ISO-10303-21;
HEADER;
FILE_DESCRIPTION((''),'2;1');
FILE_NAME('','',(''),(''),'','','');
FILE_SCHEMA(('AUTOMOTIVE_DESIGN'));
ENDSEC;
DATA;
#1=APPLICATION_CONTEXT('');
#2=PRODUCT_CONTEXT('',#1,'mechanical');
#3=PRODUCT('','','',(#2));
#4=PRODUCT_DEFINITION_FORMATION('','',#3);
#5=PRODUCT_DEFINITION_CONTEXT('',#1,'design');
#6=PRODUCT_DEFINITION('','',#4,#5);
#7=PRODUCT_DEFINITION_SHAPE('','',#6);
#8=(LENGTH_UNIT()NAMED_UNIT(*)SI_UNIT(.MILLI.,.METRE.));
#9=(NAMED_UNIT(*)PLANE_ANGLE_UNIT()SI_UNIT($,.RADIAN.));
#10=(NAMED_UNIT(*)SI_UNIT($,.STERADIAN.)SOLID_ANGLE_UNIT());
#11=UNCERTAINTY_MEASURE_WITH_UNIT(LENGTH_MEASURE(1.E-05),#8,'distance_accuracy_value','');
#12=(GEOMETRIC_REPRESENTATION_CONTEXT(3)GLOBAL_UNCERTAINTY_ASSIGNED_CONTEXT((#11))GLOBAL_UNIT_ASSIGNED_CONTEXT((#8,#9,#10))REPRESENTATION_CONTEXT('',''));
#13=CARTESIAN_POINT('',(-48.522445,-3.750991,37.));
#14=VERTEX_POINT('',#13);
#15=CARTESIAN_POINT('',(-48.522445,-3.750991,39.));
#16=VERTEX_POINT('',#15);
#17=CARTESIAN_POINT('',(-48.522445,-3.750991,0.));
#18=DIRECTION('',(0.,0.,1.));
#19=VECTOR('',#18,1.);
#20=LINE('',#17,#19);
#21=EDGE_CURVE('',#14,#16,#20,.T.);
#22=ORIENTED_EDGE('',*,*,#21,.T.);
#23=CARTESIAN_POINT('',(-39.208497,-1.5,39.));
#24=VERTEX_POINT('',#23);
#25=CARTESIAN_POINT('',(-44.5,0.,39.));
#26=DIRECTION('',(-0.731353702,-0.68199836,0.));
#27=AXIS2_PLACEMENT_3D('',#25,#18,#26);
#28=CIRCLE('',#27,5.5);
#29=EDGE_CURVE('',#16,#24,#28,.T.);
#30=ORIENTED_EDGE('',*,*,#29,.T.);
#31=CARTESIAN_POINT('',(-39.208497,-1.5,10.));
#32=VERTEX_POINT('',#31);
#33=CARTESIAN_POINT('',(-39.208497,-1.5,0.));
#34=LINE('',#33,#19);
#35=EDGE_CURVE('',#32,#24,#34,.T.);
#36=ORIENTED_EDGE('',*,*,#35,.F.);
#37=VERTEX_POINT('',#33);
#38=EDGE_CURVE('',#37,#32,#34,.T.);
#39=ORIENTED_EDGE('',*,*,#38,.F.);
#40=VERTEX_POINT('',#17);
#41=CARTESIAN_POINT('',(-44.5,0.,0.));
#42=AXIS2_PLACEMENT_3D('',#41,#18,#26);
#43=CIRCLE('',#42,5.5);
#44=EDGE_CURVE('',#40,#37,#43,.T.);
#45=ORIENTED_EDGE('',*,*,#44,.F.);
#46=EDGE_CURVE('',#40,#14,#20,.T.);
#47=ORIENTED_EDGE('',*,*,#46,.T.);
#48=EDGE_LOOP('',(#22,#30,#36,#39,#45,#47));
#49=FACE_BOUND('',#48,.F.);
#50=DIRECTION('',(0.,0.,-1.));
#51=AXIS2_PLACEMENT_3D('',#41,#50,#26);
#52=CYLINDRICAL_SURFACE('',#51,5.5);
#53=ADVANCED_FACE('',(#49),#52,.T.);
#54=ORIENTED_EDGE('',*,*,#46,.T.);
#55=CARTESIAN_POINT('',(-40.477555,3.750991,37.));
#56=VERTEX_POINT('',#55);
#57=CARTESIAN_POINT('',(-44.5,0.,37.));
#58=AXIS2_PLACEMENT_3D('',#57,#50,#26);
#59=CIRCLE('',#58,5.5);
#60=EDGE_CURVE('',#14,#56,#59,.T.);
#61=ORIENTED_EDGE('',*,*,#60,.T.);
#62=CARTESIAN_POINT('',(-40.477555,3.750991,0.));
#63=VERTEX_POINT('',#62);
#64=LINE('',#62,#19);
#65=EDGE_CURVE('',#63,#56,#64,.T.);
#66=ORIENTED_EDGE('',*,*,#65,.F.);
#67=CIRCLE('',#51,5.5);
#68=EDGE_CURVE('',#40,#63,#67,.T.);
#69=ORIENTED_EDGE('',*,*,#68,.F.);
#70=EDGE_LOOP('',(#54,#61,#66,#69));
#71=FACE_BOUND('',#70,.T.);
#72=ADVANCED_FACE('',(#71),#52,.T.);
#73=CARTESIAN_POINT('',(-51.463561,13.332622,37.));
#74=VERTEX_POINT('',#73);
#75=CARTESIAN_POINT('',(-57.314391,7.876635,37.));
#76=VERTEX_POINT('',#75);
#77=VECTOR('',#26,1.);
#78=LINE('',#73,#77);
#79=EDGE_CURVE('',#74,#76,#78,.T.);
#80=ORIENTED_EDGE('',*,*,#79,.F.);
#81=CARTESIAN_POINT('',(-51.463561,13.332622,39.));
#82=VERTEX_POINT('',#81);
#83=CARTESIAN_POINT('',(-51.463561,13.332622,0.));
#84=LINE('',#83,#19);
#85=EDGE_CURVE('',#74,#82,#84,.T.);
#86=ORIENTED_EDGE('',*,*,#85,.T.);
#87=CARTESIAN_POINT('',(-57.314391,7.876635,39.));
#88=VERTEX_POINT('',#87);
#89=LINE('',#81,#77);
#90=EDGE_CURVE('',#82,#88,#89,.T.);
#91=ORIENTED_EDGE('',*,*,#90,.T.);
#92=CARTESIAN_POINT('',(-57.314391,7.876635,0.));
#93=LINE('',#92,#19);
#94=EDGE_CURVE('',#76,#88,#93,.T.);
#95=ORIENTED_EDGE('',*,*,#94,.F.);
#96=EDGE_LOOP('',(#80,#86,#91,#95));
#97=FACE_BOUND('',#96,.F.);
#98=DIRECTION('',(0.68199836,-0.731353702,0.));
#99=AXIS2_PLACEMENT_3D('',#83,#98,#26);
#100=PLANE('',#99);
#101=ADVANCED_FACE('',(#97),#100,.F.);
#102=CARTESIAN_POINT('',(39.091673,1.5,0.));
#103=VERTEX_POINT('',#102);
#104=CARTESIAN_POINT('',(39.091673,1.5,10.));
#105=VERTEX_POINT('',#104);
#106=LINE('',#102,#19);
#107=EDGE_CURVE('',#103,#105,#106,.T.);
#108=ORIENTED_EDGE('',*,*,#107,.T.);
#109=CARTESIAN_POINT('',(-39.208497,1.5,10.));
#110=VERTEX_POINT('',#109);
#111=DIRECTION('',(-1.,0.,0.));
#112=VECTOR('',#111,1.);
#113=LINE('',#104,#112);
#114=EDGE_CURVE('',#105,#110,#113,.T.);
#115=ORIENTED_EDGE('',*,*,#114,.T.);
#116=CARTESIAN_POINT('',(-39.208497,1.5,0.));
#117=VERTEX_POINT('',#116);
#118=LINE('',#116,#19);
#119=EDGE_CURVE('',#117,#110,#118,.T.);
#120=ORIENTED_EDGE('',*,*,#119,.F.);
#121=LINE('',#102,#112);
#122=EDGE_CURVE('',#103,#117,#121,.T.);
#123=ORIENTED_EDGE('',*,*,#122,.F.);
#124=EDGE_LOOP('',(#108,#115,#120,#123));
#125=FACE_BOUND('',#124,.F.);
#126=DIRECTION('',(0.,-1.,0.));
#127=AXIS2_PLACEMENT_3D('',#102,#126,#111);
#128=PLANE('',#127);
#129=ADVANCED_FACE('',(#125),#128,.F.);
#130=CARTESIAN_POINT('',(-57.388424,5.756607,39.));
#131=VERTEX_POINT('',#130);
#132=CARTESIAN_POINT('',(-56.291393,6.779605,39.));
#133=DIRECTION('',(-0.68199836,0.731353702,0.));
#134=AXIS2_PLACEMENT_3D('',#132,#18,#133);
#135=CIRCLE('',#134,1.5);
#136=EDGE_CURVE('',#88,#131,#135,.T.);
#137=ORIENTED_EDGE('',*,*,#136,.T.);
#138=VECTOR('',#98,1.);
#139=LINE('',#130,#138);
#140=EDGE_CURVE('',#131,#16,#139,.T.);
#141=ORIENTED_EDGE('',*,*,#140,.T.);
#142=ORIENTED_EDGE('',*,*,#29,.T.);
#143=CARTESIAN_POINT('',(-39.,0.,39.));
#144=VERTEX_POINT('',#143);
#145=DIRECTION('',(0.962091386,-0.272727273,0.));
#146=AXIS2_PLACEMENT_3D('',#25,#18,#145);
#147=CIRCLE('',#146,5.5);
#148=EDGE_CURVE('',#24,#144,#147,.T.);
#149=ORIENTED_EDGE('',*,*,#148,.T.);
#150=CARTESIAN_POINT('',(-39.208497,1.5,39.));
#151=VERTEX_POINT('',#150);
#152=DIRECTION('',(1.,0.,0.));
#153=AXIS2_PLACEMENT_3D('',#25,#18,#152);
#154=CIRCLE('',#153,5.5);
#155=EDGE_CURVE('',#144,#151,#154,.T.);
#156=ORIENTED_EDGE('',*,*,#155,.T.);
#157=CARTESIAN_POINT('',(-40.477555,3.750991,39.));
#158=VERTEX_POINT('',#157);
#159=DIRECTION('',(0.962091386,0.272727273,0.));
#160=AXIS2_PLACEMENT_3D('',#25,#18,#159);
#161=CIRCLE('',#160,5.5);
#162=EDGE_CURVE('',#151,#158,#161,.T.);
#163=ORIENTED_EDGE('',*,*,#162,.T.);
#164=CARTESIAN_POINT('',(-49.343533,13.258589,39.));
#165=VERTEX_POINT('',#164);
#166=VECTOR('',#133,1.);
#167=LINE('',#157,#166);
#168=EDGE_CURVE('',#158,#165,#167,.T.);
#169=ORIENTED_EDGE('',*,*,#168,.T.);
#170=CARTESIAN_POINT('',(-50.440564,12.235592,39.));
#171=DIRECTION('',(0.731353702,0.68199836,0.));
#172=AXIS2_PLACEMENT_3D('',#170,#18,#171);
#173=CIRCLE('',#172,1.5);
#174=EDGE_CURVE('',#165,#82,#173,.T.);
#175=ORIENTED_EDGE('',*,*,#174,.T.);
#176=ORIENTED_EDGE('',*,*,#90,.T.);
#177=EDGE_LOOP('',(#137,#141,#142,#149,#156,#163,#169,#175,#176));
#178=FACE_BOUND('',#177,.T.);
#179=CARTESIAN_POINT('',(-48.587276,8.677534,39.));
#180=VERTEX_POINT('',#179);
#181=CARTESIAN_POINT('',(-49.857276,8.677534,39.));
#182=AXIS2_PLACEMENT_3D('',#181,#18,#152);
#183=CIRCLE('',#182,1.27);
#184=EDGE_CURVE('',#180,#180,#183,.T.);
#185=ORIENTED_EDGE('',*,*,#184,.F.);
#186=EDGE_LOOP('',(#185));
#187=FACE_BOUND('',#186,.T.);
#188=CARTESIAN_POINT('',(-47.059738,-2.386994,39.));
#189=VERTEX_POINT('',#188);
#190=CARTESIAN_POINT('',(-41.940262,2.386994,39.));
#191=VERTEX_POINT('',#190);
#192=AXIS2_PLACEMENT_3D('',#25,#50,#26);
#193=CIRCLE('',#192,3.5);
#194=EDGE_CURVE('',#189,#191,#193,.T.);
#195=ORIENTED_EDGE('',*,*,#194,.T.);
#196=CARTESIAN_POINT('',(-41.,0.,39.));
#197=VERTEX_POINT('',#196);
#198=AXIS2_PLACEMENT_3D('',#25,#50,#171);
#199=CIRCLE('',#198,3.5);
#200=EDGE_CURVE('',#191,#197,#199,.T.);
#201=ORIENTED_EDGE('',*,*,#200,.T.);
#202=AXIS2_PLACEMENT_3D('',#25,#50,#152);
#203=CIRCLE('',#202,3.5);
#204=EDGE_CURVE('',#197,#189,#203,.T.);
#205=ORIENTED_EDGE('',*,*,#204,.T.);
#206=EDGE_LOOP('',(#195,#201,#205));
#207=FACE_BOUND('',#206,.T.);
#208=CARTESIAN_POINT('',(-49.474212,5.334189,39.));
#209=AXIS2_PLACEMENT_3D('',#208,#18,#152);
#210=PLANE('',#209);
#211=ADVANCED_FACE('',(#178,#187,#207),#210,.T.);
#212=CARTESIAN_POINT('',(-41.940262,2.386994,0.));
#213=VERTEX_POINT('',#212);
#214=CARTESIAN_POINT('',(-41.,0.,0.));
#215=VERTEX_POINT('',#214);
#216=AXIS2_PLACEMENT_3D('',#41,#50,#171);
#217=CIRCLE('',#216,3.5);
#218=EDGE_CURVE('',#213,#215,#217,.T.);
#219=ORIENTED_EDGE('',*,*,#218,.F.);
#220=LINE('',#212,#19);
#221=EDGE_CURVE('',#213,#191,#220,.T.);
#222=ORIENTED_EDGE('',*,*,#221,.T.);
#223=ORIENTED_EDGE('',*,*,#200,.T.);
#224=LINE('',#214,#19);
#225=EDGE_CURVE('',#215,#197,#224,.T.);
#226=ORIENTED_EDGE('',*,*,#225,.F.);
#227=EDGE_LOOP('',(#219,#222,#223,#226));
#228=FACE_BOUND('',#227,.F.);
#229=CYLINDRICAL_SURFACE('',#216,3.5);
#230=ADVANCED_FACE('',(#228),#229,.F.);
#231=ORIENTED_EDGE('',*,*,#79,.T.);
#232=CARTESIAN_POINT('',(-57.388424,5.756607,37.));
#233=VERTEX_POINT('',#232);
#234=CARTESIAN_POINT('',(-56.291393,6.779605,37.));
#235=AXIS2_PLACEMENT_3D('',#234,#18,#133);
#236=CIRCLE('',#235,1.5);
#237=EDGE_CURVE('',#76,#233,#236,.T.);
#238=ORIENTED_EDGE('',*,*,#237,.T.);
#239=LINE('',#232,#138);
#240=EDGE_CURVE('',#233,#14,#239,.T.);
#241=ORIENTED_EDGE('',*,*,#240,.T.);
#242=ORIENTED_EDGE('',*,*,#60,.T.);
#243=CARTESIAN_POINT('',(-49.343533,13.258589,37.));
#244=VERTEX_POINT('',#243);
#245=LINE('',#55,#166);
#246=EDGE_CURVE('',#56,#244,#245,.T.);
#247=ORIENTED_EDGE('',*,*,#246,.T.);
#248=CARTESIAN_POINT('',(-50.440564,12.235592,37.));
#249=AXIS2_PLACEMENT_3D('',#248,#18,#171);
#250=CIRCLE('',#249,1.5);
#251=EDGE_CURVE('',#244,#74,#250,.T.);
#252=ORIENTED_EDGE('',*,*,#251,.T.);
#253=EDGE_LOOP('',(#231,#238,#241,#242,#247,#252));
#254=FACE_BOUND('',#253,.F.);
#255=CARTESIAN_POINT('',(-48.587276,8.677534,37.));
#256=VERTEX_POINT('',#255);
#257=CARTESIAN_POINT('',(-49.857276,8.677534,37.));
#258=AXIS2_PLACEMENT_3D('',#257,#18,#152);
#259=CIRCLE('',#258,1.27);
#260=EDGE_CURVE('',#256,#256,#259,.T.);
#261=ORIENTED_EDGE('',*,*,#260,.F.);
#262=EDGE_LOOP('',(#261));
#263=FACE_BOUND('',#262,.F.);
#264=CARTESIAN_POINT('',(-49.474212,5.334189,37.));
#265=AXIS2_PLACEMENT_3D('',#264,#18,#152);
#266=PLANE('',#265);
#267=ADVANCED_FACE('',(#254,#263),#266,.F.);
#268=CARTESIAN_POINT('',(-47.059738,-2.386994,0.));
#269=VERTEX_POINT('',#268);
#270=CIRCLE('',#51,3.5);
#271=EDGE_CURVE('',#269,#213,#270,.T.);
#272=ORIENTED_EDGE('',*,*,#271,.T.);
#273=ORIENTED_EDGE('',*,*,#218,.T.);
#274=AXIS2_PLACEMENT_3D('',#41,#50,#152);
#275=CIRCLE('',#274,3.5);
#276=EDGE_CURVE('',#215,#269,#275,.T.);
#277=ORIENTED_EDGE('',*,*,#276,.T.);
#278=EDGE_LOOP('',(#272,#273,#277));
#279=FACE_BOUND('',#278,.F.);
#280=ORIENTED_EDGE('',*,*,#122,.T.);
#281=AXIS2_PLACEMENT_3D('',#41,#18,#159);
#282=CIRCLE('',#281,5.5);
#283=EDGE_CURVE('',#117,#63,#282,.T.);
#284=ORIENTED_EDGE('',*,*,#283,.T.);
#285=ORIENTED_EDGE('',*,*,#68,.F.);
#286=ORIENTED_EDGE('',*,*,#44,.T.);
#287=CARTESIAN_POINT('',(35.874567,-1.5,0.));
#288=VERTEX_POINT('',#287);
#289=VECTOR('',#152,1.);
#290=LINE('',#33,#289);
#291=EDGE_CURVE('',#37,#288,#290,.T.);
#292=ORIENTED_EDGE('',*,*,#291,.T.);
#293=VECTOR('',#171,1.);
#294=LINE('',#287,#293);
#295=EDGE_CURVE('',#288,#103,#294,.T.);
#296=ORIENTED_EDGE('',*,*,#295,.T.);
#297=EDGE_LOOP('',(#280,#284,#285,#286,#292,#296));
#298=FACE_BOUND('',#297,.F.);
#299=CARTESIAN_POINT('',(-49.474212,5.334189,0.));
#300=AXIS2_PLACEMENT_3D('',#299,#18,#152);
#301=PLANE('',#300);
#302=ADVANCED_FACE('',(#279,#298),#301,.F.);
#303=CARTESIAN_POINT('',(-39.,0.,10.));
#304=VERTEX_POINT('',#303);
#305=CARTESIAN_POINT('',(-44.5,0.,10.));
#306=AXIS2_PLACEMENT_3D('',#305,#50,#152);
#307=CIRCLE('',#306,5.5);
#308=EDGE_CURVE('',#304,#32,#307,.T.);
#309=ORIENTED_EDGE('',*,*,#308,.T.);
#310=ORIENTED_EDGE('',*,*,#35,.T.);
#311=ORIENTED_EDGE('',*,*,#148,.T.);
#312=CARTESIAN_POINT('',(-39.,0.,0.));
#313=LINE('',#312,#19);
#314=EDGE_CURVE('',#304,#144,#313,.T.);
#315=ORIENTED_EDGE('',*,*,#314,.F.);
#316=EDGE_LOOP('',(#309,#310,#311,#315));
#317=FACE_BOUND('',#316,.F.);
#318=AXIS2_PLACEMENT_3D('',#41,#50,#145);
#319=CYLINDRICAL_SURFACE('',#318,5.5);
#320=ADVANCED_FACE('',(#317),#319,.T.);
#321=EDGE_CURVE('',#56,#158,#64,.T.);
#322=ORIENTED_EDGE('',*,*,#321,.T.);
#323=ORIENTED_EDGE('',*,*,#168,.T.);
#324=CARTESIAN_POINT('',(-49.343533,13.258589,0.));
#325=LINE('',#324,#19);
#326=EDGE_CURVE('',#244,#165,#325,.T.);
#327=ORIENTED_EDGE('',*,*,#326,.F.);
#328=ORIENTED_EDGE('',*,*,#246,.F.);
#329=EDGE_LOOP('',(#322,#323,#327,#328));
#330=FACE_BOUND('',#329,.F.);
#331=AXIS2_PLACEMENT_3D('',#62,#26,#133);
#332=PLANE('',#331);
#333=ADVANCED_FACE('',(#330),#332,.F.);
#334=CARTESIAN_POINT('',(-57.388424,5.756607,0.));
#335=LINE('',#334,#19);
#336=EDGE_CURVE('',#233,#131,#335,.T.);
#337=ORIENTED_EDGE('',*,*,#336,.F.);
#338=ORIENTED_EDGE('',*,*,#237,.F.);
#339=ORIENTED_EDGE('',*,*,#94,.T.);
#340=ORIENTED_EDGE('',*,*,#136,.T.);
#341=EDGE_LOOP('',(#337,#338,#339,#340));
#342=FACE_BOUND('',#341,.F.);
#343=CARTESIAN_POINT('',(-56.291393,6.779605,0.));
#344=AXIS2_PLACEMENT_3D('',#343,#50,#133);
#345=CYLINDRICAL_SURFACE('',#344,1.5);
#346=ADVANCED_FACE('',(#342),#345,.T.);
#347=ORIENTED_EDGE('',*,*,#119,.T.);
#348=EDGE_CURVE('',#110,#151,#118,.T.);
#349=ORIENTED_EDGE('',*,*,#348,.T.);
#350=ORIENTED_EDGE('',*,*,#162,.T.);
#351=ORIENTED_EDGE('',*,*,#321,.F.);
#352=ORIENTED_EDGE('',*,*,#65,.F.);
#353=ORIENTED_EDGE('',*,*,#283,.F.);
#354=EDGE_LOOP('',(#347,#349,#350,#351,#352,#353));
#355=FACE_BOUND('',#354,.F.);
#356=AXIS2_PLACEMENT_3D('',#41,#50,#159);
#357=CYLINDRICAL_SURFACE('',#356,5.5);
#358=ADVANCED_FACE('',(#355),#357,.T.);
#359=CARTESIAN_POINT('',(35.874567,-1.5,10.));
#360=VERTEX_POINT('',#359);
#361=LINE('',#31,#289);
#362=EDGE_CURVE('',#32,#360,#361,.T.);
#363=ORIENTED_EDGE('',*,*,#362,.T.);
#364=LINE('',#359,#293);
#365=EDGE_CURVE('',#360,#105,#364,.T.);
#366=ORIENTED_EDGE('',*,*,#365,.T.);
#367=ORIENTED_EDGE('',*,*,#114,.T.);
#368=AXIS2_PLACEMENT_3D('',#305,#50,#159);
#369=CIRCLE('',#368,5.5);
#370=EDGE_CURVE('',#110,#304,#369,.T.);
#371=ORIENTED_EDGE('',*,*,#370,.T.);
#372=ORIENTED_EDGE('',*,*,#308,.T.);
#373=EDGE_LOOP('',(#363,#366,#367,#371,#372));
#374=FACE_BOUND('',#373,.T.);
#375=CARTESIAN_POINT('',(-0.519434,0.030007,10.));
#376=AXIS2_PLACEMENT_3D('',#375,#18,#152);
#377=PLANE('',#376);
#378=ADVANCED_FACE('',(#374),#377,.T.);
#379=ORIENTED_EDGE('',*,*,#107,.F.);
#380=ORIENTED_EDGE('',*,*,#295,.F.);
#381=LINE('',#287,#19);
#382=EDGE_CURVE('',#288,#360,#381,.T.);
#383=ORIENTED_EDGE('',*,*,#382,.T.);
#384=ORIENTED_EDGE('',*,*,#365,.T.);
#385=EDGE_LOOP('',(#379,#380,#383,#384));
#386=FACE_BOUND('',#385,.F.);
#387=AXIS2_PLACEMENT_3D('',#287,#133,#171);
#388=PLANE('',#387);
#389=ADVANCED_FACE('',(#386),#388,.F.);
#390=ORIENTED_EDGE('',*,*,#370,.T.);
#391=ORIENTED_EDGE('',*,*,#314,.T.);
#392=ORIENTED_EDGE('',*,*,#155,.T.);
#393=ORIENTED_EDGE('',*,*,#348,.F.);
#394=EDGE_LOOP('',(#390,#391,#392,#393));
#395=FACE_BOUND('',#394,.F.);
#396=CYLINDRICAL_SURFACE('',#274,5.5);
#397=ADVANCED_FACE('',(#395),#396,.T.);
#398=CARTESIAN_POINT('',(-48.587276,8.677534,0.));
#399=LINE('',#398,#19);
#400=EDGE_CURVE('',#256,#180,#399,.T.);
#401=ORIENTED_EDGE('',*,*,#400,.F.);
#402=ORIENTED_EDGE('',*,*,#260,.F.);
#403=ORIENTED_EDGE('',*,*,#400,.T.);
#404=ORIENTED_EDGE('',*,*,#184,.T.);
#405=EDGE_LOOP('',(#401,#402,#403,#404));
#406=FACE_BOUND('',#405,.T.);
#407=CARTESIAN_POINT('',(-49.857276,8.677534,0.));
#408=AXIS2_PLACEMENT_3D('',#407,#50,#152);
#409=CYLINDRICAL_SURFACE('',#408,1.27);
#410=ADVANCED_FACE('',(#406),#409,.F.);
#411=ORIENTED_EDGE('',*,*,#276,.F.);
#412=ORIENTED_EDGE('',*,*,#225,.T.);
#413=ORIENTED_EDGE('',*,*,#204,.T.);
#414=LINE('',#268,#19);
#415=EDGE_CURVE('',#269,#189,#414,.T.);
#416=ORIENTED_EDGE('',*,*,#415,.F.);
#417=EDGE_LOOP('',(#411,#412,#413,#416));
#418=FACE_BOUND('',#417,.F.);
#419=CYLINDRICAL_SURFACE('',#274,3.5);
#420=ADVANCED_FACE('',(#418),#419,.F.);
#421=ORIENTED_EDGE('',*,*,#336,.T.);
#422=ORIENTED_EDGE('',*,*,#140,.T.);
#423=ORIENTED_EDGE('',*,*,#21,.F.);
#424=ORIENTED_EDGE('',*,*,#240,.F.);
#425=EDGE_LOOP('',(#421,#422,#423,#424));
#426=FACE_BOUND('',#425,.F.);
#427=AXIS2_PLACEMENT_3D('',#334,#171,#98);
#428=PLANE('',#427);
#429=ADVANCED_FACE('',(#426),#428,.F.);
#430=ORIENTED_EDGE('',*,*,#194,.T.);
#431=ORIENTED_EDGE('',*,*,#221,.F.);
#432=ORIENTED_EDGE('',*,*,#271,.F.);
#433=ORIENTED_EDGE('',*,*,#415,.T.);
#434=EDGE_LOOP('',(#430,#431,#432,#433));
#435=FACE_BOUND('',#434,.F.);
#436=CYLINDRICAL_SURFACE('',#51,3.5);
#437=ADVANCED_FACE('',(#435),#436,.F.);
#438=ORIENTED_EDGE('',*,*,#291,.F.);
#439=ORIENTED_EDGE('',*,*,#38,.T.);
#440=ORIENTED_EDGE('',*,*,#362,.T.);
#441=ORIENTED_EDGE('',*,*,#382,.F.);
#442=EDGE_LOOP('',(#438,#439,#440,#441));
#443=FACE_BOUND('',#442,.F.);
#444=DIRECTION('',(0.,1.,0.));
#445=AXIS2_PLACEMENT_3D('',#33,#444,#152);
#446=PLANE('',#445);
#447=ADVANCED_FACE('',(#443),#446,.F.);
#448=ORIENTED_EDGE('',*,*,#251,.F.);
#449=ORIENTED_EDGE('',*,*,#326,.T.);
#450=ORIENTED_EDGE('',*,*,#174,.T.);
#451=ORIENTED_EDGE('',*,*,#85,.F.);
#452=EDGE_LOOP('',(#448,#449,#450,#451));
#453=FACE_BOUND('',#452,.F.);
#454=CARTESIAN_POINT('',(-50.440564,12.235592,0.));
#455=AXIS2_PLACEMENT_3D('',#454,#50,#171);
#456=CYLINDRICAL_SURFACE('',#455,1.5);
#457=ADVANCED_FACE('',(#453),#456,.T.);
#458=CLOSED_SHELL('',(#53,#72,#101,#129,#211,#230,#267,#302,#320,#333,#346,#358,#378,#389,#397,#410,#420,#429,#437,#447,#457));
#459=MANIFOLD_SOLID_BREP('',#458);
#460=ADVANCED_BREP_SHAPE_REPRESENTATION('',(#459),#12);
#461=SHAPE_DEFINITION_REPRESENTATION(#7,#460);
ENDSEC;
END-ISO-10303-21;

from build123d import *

# Parameters (mm, degrees)
F1_DEPTH = 10
F2_DEPTH = 39
F3_R     = 1.27
F4_DEPTH = 39
F0_R     = 1.27
F5_DEPTH = 37


# Not quite as in the source:
# - a feature names something its author has since deleted; it is built from what else it names


with BuildPart() as f1:
    # F0 (on Top) → F1 (new body)
    with BuildSketch(Plane.XY):
        with BuildLine():
            Line((39.0916730868, 1.5), (-39.2084973779, 1.5))
            ThreePointArc((-39.2084973779, 1.5), (-39.0523737086, 0.7572105316), (-39, 0))
            ThreePointArc((-39, 0), (-39.0523737086, -0.7572105316), (-39.2084973779, -1.5))
            Line((-39.2084973779, -1.5), (35.8745669567, -1.5))
            Line((35.8745669567, -1.5), (39.0916730868, 1.5))
        make_face()
    extrude(amount=F1_DEPTH)

    # F0 (on Top) → F2 (join)
    with BuildSketch(Plane.XY):
        with BuildLine():
            ThreePointArc((-47.0597379557, -2.3869942602), (-46.8869942602, 2.5597379557), (-41.9402620443, 2.3869942602))
            Line((-41.9402620443, 2.3869942602), (-40.4775546411, 3.7509909803))
            ThreePointArc((-40.4775546411, 3.7509909803), (-48.2509909803, 4.0224453589), (-48.5224453589, -3.7509909803))
            Line((-48.5224453589, -3.7509909803), (-47.0597379557, -2.3869942602))
        make_face()
        with BuildLine():
            ThreePointArc((-41.9402620443, 2.3869942602), (-41.2435385121, 1.2827542935), (-41, 0))
            ThreePointArc((-41, 0), (-43.2172457065, -3.2564614879), (-47.0597379557, -2.3869942602))
            Line((-47.0597379557, -2.3869942602), (-48.5224453589, -3.7509909803))
            ThreePointArc((-48.5224453589, -3.7509909803), (-43.2079602627, -5.346085794), (-39.2084973779, -1.5))
            ThreePointArc((-39.2084973779, -1.5), (-39.0523737086, -0.7572105316), (-39, 0))
            ThreePointArc((-39, 0), (-39.0523737086, 0.7572105316), (-39.2084973779, 1.5))
            ThreePointArc((-39.2084973779, 1.5), (-39.7089513834, 2.7010836998), (-40.4775546411, 3.7509909803))
            Line((-40.4775546411, 3.7509909803), (-41.9402620443, 2.3869942602))
        make_face()
    extrude(amount=F2_DEPTH)

    # F3 (on face) → F4 (join)
    with BuildSketch(Plane.XY):
        with BuildLine():
            Line((-57.3884240397, 5.7566071407), (-48.5224453589, -3.7509909803))
            ThreePointArc((-48.5224453589, -3.7509909803), (-48.2509909803, 4.0224453589), (-40.4775546411, 3.7509909803))
            Line((-40.4775546411, 3.7509909803), (-49.3435333219, 13.2585891014))
            ThreePointArc((-49.3435333219, 13.2585891014), (-50.3882146293, 13.7346778018), (-51.4635614144, 13.3326221137))
            Line((-51.4635614144, 13.3326221137), (-57.3143910274, 7.8766352332))
            ThreePointArc((-57.3143910274, 7.8766352332), (-57.7904797278, 6.8319539259), (-57.3884240397, 5.7566071407))
        make_face()
        with Locations((-49.8572761974, 8.6775337363)):
            Circle(F3_R, mode=Mode.SUBTRACT)
    extrude(amount=F4_DEPTH)

    # F0 (on Top) → F5 (cut)
    with BuildSketch(Plane.XY):
        with BuildLine():
            ThreePointArc((-48.5224453589, -3.7509909803), (-48.2509909803, 4.0224453589), (-40.4775546411, 3.7509909803))
            Line((-40.4775546411, 3.7509909803), (-49.3435333219, 13.2585891014))
            ThreePointArc((-49.3435333219, 13.2585891014), (-50.3882146293, 13.7346778018), (-51.4635614144, 13.3326221137))
            Line((-51.4635614144, 13.3326221137), (-57.3143910274, 7.8766352332))
            ThreePointArc((-57.3143910274, 7.8766352332), (-57.7904797278, 6.8319539259), (-57.3884240397, 5.7566071407))
            Line((-57.3884240397, 5.7566071407), (-48.5224453589, -3.7509909803))
        make_face()
        with Locations((-49.8572761974, 8.6775337363)):
            Circle(F0_R, mode=Mode.SUBTRACT)
    extrude(amount=F5_DEPTH, mode=Mode.SUBTRACT)


solid = f1.part
